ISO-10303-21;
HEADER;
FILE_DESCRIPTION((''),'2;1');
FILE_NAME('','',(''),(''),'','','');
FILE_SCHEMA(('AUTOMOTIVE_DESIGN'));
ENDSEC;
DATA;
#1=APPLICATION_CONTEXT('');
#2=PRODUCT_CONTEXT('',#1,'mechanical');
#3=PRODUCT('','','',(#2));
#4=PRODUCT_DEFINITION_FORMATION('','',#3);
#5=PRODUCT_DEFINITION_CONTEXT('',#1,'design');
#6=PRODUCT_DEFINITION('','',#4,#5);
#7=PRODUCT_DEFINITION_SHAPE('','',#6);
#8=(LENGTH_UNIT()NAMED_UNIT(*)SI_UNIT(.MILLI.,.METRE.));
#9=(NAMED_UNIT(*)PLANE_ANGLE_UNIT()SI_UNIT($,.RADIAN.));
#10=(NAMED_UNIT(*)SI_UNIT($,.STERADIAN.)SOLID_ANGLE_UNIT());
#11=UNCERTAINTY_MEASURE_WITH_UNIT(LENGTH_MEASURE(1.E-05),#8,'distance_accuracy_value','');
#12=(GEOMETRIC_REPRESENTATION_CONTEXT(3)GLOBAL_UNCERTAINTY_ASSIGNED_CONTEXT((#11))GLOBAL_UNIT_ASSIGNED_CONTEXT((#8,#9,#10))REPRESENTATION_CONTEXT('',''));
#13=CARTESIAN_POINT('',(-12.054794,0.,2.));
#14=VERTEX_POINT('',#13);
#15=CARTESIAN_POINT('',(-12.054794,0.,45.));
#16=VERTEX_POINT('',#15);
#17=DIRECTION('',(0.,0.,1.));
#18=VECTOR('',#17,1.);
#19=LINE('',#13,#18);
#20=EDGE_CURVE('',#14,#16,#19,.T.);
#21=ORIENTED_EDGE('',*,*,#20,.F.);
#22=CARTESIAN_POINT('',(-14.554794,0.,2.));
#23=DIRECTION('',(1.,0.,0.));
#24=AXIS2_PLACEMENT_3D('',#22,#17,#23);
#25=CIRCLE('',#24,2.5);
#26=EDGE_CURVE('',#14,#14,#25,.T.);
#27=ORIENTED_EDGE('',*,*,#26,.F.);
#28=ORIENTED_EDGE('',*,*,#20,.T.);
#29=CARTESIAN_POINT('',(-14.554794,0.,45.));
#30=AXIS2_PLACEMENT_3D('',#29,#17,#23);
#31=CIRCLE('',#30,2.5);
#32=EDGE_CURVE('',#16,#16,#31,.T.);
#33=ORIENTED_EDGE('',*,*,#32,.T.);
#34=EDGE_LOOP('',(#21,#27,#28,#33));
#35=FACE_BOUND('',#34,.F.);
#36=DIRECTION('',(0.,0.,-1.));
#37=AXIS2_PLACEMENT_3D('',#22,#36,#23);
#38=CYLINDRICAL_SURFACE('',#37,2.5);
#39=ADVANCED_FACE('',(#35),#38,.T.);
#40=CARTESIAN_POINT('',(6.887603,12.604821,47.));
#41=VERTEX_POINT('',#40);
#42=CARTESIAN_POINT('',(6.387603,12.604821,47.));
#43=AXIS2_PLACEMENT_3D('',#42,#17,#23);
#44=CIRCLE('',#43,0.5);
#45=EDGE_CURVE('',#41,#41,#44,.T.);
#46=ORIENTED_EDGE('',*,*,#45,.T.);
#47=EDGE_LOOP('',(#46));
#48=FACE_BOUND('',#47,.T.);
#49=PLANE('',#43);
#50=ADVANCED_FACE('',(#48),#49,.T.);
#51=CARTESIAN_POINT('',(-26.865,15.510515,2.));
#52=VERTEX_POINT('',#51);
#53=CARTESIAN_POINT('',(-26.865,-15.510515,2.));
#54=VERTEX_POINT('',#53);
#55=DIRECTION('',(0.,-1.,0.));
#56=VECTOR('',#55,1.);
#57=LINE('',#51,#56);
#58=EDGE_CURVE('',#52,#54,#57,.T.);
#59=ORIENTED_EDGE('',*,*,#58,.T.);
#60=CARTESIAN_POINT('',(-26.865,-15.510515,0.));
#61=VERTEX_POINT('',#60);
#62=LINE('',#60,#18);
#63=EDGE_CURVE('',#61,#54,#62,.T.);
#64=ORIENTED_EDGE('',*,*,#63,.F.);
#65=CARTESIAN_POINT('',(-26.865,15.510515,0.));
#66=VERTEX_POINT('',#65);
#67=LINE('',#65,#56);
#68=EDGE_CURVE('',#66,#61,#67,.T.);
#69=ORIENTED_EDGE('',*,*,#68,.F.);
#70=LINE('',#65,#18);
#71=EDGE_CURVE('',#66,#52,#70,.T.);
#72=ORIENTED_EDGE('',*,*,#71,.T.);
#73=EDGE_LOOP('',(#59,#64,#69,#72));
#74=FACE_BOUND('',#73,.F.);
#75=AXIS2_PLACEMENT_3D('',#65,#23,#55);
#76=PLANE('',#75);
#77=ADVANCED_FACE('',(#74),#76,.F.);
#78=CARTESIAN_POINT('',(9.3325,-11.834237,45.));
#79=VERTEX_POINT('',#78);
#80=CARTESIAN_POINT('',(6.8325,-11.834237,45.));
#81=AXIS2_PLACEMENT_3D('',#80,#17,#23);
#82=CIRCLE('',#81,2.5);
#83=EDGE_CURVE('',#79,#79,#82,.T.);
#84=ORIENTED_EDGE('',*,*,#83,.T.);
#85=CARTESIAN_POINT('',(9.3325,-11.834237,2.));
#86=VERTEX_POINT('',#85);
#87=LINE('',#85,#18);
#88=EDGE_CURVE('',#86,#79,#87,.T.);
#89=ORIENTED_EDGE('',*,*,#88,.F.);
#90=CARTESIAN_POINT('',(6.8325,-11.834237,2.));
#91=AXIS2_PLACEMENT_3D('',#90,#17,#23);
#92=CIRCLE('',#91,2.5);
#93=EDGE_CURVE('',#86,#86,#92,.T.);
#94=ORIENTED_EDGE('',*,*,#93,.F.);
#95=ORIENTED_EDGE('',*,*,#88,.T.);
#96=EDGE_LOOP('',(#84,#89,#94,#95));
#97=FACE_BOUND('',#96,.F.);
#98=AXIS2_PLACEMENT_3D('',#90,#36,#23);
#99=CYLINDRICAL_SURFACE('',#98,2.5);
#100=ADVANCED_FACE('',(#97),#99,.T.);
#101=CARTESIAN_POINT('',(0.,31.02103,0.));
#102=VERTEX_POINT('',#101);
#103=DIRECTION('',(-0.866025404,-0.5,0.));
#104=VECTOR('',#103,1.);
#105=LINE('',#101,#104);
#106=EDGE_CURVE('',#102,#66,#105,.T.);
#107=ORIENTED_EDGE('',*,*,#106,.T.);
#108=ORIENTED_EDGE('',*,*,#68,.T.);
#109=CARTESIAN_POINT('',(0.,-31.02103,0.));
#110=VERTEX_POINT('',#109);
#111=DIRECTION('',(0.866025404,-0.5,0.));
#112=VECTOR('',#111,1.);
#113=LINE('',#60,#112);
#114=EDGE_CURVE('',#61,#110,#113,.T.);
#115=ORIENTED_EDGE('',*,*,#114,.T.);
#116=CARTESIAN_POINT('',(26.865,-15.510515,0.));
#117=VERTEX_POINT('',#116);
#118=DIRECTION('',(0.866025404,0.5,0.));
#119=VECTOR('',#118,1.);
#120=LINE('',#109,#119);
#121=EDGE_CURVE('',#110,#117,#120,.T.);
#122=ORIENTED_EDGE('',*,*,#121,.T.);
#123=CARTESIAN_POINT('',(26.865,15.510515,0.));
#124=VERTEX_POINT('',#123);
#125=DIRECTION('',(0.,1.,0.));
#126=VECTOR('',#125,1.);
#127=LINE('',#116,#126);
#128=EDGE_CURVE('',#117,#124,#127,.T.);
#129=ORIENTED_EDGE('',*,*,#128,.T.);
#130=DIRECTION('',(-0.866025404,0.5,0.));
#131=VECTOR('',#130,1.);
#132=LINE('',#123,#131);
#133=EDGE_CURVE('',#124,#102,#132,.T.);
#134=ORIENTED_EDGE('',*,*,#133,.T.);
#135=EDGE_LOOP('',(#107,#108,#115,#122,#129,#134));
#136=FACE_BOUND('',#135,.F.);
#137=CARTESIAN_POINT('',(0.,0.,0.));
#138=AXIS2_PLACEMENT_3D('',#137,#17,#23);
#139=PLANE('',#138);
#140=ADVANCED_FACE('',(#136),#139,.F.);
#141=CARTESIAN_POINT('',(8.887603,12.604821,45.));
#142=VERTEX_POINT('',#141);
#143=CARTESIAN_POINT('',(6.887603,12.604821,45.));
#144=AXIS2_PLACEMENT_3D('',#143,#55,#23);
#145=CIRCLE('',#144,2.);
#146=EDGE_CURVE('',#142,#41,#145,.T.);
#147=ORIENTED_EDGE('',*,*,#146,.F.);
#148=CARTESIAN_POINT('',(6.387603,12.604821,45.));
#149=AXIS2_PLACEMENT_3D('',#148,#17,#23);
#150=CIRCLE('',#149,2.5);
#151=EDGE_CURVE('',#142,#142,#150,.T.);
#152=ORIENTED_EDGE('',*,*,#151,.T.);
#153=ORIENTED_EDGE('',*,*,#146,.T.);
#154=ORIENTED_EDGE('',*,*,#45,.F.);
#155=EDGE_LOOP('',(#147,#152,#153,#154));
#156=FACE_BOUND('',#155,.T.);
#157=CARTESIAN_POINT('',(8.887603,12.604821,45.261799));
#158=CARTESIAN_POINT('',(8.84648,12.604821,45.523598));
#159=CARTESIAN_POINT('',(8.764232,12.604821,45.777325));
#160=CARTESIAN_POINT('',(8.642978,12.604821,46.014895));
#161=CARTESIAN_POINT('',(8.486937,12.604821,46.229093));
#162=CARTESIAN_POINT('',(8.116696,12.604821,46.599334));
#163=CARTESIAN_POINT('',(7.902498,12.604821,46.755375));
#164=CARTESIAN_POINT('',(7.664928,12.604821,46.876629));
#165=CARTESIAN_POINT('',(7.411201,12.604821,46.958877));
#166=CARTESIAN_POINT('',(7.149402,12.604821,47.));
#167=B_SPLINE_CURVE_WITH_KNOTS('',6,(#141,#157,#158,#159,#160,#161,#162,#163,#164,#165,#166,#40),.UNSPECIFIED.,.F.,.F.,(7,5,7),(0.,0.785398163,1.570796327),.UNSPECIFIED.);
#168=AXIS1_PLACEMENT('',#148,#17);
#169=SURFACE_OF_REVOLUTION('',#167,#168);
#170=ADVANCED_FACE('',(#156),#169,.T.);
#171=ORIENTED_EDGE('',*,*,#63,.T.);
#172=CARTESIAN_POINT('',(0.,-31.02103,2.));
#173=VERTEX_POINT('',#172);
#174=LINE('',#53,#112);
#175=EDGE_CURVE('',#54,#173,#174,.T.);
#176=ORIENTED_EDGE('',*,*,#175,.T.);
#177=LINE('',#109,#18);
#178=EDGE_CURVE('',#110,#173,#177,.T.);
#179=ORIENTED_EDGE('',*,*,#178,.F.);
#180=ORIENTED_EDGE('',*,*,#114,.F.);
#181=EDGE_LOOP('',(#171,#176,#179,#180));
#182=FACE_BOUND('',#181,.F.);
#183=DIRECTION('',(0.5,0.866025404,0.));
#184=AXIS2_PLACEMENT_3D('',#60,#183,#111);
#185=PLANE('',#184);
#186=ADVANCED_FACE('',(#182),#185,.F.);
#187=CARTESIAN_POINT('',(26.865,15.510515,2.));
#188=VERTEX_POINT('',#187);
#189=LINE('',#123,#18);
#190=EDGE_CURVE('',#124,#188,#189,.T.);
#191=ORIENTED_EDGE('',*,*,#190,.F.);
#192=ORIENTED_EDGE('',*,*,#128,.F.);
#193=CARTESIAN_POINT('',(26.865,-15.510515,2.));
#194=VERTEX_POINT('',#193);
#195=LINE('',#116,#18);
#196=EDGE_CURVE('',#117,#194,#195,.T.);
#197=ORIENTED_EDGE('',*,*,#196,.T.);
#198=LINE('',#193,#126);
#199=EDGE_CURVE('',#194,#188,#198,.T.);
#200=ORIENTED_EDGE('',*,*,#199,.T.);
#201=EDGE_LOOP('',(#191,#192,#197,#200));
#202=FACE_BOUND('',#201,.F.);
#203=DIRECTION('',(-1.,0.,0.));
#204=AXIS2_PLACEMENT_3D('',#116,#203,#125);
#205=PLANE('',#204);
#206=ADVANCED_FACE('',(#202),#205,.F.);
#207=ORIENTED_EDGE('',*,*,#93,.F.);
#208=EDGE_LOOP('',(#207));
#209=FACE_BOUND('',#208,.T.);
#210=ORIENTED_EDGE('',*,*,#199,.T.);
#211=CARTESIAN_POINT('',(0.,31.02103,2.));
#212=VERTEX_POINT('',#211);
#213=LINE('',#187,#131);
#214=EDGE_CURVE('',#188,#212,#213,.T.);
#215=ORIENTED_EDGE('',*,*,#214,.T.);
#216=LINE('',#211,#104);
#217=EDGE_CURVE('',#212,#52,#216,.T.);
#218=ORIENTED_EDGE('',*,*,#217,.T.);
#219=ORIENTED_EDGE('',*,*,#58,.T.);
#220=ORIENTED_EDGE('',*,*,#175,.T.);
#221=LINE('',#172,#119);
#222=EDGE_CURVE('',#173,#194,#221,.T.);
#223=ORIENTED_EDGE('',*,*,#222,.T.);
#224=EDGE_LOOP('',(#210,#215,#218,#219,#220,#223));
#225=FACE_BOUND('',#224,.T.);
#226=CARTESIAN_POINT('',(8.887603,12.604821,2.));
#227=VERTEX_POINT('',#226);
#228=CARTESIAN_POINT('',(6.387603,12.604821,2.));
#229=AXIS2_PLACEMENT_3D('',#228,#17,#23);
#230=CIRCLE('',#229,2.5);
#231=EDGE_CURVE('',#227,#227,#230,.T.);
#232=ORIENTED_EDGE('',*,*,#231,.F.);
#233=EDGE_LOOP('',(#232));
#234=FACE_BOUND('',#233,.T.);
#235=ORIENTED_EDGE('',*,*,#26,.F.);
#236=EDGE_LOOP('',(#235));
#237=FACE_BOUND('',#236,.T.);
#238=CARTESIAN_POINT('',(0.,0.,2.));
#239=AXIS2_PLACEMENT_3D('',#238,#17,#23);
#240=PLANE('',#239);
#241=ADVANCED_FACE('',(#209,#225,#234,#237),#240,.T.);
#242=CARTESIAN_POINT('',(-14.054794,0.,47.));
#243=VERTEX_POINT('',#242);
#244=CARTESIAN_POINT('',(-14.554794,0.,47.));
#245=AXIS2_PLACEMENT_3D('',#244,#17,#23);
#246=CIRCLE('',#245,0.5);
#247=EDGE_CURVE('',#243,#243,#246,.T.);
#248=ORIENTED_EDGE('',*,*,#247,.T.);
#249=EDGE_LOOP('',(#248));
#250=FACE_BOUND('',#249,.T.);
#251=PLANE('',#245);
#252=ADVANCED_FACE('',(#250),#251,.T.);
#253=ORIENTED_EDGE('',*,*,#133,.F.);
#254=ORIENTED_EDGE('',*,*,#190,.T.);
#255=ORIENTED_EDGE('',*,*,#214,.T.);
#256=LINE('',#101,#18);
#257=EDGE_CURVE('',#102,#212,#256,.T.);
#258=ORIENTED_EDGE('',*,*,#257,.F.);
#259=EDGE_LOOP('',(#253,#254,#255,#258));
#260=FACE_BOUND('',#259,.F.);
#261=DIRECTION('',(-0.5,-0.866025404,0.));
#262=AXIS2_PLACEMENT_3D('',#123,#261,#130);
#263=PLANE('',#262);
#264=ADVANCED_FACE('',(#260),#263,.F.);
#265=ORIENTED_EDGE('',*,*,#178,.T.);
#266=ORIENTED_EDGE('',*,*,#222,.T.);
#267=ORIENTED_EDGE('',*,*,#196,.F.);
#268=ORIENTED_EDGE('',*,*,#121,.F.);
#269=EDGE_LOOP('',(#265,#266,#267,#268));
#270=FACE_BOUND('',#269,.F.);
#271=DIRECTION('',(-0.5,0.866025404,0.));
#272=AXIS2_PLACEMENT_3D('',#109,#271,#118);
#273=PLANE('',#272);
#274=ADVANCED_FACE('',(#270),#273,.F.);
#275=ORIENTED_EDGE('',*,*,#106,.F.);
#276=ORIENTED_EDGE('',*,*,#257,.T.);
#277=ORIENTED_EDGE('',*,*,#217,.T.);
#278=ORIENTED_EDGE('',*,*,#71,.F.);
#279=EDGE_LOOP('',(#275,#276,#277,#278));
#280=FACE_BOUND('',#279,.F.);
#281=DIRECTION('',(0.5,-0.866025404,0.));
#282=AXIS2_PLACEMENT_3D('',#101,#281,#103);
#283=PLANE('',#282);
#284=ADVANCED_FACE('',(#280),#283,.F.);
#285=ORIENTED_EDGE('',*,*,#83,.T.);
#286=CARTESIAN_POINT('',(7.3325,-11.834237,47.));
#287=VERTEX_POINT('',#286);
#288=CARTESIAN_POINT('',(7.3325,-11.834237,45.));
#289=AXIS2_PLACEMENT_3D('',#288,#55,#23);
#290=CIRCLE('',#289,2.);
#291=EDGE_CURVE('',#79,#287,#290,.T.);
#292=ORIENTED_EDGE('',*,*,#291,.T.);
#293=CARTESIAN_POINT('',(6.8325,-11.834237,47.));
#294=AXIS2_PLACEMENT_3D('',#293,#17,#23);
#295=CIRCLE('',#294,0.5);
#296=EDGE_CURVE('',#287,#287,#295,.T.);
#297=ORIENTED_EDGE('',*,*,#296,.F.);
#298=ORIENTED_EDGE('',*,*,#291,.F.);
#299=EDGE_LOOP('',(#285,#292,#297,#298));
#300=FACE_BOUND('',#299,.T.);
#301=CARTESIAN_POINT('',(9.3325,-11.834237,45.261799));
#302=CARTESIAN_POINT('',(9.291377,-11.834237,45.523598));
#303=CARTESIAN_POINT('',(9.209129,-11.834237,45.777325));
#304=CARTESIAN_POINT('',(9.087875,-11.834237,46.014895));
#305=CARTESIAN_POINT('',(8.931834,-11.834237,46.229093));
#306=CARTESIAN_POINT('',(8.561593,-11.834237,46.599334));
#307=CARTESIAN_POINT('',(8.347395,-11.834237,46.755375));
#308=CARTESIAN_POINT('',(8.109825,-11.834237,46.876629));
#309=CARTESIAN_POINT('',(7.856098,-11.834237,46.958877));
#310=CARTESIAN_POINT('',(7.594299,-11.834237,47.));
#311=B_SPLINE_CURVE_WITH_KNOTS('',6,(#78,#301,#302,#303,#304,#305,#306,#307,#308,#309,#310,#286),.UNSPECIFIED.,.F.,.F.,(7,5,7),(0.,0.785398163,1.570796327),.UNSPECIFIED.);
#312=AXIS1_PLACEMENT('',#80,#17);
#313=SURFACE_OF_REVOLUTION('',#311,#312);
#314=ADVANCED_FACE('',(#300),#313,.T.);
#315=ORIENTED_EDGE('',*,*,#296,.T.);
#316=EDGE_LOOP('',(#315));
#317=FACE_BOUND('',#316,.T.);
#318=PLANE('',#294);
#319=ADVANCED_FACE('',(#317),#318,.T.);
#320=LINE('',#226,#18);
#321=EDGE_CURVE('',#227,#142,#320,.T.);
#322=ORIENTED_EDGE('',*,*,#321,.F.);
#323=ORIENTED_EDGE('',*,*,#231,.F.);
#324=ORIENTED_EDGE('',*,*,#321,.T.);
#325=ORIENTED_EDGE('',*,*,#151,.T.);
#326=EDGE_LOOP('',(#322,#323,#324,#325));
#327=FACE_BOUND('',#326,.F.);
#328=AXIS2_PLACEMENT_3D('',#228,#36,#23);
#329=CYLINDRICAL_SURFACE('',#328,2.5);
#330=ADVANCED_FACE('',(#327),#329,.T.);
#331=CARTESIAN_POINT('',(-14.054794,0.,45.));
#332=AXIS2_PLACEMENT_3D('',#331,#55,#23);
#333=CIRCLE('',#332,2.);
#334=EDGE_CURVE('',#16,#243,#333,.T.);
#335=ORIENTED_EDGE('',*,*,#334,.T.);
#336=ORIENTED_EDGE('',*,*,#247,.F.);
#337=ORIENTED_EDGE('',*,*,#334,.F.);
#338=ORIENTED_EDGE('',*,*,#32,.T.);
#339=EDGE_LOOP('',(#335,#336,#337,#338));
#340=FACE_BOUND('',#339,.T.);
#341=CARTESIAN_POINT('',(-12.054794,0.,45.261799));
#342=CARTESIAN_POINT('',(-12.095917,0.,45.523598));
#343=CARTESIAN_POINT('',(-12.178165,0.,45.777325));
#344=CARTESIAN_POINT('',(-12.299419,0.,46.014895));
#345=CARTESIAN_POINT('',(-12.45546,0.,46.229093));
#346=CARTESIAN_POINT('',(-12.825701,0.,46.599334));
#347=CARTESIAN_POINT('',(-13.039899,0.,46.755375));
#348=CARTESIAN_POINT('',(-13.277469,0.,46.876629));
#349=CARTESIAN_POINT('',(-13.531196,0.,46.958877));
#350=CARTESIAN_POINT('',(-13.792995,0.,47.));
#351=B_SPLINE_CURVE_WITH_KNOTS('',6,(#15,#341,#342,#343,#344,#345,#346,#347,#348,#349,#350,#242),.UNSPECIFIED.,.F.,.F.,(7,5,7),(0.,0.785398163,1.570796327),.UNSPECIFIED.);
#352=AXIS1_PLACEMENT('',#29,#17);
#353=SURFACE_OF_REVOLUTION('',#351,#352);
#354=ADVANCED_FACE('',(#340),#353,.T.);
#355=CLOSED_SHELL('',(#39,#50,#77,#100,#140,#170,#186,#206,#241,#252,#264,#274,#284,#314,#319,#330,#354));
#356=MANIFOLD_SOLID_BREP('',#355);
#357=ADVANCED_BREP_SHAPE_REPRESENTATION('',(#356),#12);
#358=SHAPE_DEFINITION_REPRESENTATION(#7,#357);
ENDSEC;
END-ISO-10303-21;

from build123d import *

# Parameters (mm, degrees)
F0_R     = 22.365
F1_DEPTH = 2
F2_R     = 2.5
F3_DEPTH = 45
F4_R     = 2


# Not quite as in the source:
# - a feature of the source that left no trace in its solid (it failed there, or was rolled back) is left out


with BuildPart() as f1:
    # F0 (on Top) → F1 (new body)
    with BuildSketch(Plane.XY):
        Polygon((26.865, -15.5105149818), (26.865, 15.5105149818), (0, 31.0210299636), (-26.865, 15.5105149818), (-26.865, -15.5105149818), (0, -31.0210299636), align=None)
        Circle(F0_R, mode=Mode.SUBTRACT)
        Circle(F0_R)
    extrude(amount=F1_DEPTH)

    # F2 (on face) → F3 (join)
    with BuildSketch(Plane.XY.offset(2)):
        with Locations((-14.5547939909, 0)):
            Circle(F2_R)
        with Locations((6.3876030045, 12.604821343)):
            Circle(F2_R)
        with Locations((6.8325, -11.8342371427)):
            Circle(F2_R)
    extrude(amount=F3_DEPTH)

    # F4
    f4_edges = [f1.edges().sort_by_distance(p)[0] for p in [
        (-17.054794, 0, 47),
        (4.3325, -11.834237, 47),
        (3.887603, 12.604821, 47),
    ]]
    fillet(f4_edges, radius=F4_R)


solid = f1.part
